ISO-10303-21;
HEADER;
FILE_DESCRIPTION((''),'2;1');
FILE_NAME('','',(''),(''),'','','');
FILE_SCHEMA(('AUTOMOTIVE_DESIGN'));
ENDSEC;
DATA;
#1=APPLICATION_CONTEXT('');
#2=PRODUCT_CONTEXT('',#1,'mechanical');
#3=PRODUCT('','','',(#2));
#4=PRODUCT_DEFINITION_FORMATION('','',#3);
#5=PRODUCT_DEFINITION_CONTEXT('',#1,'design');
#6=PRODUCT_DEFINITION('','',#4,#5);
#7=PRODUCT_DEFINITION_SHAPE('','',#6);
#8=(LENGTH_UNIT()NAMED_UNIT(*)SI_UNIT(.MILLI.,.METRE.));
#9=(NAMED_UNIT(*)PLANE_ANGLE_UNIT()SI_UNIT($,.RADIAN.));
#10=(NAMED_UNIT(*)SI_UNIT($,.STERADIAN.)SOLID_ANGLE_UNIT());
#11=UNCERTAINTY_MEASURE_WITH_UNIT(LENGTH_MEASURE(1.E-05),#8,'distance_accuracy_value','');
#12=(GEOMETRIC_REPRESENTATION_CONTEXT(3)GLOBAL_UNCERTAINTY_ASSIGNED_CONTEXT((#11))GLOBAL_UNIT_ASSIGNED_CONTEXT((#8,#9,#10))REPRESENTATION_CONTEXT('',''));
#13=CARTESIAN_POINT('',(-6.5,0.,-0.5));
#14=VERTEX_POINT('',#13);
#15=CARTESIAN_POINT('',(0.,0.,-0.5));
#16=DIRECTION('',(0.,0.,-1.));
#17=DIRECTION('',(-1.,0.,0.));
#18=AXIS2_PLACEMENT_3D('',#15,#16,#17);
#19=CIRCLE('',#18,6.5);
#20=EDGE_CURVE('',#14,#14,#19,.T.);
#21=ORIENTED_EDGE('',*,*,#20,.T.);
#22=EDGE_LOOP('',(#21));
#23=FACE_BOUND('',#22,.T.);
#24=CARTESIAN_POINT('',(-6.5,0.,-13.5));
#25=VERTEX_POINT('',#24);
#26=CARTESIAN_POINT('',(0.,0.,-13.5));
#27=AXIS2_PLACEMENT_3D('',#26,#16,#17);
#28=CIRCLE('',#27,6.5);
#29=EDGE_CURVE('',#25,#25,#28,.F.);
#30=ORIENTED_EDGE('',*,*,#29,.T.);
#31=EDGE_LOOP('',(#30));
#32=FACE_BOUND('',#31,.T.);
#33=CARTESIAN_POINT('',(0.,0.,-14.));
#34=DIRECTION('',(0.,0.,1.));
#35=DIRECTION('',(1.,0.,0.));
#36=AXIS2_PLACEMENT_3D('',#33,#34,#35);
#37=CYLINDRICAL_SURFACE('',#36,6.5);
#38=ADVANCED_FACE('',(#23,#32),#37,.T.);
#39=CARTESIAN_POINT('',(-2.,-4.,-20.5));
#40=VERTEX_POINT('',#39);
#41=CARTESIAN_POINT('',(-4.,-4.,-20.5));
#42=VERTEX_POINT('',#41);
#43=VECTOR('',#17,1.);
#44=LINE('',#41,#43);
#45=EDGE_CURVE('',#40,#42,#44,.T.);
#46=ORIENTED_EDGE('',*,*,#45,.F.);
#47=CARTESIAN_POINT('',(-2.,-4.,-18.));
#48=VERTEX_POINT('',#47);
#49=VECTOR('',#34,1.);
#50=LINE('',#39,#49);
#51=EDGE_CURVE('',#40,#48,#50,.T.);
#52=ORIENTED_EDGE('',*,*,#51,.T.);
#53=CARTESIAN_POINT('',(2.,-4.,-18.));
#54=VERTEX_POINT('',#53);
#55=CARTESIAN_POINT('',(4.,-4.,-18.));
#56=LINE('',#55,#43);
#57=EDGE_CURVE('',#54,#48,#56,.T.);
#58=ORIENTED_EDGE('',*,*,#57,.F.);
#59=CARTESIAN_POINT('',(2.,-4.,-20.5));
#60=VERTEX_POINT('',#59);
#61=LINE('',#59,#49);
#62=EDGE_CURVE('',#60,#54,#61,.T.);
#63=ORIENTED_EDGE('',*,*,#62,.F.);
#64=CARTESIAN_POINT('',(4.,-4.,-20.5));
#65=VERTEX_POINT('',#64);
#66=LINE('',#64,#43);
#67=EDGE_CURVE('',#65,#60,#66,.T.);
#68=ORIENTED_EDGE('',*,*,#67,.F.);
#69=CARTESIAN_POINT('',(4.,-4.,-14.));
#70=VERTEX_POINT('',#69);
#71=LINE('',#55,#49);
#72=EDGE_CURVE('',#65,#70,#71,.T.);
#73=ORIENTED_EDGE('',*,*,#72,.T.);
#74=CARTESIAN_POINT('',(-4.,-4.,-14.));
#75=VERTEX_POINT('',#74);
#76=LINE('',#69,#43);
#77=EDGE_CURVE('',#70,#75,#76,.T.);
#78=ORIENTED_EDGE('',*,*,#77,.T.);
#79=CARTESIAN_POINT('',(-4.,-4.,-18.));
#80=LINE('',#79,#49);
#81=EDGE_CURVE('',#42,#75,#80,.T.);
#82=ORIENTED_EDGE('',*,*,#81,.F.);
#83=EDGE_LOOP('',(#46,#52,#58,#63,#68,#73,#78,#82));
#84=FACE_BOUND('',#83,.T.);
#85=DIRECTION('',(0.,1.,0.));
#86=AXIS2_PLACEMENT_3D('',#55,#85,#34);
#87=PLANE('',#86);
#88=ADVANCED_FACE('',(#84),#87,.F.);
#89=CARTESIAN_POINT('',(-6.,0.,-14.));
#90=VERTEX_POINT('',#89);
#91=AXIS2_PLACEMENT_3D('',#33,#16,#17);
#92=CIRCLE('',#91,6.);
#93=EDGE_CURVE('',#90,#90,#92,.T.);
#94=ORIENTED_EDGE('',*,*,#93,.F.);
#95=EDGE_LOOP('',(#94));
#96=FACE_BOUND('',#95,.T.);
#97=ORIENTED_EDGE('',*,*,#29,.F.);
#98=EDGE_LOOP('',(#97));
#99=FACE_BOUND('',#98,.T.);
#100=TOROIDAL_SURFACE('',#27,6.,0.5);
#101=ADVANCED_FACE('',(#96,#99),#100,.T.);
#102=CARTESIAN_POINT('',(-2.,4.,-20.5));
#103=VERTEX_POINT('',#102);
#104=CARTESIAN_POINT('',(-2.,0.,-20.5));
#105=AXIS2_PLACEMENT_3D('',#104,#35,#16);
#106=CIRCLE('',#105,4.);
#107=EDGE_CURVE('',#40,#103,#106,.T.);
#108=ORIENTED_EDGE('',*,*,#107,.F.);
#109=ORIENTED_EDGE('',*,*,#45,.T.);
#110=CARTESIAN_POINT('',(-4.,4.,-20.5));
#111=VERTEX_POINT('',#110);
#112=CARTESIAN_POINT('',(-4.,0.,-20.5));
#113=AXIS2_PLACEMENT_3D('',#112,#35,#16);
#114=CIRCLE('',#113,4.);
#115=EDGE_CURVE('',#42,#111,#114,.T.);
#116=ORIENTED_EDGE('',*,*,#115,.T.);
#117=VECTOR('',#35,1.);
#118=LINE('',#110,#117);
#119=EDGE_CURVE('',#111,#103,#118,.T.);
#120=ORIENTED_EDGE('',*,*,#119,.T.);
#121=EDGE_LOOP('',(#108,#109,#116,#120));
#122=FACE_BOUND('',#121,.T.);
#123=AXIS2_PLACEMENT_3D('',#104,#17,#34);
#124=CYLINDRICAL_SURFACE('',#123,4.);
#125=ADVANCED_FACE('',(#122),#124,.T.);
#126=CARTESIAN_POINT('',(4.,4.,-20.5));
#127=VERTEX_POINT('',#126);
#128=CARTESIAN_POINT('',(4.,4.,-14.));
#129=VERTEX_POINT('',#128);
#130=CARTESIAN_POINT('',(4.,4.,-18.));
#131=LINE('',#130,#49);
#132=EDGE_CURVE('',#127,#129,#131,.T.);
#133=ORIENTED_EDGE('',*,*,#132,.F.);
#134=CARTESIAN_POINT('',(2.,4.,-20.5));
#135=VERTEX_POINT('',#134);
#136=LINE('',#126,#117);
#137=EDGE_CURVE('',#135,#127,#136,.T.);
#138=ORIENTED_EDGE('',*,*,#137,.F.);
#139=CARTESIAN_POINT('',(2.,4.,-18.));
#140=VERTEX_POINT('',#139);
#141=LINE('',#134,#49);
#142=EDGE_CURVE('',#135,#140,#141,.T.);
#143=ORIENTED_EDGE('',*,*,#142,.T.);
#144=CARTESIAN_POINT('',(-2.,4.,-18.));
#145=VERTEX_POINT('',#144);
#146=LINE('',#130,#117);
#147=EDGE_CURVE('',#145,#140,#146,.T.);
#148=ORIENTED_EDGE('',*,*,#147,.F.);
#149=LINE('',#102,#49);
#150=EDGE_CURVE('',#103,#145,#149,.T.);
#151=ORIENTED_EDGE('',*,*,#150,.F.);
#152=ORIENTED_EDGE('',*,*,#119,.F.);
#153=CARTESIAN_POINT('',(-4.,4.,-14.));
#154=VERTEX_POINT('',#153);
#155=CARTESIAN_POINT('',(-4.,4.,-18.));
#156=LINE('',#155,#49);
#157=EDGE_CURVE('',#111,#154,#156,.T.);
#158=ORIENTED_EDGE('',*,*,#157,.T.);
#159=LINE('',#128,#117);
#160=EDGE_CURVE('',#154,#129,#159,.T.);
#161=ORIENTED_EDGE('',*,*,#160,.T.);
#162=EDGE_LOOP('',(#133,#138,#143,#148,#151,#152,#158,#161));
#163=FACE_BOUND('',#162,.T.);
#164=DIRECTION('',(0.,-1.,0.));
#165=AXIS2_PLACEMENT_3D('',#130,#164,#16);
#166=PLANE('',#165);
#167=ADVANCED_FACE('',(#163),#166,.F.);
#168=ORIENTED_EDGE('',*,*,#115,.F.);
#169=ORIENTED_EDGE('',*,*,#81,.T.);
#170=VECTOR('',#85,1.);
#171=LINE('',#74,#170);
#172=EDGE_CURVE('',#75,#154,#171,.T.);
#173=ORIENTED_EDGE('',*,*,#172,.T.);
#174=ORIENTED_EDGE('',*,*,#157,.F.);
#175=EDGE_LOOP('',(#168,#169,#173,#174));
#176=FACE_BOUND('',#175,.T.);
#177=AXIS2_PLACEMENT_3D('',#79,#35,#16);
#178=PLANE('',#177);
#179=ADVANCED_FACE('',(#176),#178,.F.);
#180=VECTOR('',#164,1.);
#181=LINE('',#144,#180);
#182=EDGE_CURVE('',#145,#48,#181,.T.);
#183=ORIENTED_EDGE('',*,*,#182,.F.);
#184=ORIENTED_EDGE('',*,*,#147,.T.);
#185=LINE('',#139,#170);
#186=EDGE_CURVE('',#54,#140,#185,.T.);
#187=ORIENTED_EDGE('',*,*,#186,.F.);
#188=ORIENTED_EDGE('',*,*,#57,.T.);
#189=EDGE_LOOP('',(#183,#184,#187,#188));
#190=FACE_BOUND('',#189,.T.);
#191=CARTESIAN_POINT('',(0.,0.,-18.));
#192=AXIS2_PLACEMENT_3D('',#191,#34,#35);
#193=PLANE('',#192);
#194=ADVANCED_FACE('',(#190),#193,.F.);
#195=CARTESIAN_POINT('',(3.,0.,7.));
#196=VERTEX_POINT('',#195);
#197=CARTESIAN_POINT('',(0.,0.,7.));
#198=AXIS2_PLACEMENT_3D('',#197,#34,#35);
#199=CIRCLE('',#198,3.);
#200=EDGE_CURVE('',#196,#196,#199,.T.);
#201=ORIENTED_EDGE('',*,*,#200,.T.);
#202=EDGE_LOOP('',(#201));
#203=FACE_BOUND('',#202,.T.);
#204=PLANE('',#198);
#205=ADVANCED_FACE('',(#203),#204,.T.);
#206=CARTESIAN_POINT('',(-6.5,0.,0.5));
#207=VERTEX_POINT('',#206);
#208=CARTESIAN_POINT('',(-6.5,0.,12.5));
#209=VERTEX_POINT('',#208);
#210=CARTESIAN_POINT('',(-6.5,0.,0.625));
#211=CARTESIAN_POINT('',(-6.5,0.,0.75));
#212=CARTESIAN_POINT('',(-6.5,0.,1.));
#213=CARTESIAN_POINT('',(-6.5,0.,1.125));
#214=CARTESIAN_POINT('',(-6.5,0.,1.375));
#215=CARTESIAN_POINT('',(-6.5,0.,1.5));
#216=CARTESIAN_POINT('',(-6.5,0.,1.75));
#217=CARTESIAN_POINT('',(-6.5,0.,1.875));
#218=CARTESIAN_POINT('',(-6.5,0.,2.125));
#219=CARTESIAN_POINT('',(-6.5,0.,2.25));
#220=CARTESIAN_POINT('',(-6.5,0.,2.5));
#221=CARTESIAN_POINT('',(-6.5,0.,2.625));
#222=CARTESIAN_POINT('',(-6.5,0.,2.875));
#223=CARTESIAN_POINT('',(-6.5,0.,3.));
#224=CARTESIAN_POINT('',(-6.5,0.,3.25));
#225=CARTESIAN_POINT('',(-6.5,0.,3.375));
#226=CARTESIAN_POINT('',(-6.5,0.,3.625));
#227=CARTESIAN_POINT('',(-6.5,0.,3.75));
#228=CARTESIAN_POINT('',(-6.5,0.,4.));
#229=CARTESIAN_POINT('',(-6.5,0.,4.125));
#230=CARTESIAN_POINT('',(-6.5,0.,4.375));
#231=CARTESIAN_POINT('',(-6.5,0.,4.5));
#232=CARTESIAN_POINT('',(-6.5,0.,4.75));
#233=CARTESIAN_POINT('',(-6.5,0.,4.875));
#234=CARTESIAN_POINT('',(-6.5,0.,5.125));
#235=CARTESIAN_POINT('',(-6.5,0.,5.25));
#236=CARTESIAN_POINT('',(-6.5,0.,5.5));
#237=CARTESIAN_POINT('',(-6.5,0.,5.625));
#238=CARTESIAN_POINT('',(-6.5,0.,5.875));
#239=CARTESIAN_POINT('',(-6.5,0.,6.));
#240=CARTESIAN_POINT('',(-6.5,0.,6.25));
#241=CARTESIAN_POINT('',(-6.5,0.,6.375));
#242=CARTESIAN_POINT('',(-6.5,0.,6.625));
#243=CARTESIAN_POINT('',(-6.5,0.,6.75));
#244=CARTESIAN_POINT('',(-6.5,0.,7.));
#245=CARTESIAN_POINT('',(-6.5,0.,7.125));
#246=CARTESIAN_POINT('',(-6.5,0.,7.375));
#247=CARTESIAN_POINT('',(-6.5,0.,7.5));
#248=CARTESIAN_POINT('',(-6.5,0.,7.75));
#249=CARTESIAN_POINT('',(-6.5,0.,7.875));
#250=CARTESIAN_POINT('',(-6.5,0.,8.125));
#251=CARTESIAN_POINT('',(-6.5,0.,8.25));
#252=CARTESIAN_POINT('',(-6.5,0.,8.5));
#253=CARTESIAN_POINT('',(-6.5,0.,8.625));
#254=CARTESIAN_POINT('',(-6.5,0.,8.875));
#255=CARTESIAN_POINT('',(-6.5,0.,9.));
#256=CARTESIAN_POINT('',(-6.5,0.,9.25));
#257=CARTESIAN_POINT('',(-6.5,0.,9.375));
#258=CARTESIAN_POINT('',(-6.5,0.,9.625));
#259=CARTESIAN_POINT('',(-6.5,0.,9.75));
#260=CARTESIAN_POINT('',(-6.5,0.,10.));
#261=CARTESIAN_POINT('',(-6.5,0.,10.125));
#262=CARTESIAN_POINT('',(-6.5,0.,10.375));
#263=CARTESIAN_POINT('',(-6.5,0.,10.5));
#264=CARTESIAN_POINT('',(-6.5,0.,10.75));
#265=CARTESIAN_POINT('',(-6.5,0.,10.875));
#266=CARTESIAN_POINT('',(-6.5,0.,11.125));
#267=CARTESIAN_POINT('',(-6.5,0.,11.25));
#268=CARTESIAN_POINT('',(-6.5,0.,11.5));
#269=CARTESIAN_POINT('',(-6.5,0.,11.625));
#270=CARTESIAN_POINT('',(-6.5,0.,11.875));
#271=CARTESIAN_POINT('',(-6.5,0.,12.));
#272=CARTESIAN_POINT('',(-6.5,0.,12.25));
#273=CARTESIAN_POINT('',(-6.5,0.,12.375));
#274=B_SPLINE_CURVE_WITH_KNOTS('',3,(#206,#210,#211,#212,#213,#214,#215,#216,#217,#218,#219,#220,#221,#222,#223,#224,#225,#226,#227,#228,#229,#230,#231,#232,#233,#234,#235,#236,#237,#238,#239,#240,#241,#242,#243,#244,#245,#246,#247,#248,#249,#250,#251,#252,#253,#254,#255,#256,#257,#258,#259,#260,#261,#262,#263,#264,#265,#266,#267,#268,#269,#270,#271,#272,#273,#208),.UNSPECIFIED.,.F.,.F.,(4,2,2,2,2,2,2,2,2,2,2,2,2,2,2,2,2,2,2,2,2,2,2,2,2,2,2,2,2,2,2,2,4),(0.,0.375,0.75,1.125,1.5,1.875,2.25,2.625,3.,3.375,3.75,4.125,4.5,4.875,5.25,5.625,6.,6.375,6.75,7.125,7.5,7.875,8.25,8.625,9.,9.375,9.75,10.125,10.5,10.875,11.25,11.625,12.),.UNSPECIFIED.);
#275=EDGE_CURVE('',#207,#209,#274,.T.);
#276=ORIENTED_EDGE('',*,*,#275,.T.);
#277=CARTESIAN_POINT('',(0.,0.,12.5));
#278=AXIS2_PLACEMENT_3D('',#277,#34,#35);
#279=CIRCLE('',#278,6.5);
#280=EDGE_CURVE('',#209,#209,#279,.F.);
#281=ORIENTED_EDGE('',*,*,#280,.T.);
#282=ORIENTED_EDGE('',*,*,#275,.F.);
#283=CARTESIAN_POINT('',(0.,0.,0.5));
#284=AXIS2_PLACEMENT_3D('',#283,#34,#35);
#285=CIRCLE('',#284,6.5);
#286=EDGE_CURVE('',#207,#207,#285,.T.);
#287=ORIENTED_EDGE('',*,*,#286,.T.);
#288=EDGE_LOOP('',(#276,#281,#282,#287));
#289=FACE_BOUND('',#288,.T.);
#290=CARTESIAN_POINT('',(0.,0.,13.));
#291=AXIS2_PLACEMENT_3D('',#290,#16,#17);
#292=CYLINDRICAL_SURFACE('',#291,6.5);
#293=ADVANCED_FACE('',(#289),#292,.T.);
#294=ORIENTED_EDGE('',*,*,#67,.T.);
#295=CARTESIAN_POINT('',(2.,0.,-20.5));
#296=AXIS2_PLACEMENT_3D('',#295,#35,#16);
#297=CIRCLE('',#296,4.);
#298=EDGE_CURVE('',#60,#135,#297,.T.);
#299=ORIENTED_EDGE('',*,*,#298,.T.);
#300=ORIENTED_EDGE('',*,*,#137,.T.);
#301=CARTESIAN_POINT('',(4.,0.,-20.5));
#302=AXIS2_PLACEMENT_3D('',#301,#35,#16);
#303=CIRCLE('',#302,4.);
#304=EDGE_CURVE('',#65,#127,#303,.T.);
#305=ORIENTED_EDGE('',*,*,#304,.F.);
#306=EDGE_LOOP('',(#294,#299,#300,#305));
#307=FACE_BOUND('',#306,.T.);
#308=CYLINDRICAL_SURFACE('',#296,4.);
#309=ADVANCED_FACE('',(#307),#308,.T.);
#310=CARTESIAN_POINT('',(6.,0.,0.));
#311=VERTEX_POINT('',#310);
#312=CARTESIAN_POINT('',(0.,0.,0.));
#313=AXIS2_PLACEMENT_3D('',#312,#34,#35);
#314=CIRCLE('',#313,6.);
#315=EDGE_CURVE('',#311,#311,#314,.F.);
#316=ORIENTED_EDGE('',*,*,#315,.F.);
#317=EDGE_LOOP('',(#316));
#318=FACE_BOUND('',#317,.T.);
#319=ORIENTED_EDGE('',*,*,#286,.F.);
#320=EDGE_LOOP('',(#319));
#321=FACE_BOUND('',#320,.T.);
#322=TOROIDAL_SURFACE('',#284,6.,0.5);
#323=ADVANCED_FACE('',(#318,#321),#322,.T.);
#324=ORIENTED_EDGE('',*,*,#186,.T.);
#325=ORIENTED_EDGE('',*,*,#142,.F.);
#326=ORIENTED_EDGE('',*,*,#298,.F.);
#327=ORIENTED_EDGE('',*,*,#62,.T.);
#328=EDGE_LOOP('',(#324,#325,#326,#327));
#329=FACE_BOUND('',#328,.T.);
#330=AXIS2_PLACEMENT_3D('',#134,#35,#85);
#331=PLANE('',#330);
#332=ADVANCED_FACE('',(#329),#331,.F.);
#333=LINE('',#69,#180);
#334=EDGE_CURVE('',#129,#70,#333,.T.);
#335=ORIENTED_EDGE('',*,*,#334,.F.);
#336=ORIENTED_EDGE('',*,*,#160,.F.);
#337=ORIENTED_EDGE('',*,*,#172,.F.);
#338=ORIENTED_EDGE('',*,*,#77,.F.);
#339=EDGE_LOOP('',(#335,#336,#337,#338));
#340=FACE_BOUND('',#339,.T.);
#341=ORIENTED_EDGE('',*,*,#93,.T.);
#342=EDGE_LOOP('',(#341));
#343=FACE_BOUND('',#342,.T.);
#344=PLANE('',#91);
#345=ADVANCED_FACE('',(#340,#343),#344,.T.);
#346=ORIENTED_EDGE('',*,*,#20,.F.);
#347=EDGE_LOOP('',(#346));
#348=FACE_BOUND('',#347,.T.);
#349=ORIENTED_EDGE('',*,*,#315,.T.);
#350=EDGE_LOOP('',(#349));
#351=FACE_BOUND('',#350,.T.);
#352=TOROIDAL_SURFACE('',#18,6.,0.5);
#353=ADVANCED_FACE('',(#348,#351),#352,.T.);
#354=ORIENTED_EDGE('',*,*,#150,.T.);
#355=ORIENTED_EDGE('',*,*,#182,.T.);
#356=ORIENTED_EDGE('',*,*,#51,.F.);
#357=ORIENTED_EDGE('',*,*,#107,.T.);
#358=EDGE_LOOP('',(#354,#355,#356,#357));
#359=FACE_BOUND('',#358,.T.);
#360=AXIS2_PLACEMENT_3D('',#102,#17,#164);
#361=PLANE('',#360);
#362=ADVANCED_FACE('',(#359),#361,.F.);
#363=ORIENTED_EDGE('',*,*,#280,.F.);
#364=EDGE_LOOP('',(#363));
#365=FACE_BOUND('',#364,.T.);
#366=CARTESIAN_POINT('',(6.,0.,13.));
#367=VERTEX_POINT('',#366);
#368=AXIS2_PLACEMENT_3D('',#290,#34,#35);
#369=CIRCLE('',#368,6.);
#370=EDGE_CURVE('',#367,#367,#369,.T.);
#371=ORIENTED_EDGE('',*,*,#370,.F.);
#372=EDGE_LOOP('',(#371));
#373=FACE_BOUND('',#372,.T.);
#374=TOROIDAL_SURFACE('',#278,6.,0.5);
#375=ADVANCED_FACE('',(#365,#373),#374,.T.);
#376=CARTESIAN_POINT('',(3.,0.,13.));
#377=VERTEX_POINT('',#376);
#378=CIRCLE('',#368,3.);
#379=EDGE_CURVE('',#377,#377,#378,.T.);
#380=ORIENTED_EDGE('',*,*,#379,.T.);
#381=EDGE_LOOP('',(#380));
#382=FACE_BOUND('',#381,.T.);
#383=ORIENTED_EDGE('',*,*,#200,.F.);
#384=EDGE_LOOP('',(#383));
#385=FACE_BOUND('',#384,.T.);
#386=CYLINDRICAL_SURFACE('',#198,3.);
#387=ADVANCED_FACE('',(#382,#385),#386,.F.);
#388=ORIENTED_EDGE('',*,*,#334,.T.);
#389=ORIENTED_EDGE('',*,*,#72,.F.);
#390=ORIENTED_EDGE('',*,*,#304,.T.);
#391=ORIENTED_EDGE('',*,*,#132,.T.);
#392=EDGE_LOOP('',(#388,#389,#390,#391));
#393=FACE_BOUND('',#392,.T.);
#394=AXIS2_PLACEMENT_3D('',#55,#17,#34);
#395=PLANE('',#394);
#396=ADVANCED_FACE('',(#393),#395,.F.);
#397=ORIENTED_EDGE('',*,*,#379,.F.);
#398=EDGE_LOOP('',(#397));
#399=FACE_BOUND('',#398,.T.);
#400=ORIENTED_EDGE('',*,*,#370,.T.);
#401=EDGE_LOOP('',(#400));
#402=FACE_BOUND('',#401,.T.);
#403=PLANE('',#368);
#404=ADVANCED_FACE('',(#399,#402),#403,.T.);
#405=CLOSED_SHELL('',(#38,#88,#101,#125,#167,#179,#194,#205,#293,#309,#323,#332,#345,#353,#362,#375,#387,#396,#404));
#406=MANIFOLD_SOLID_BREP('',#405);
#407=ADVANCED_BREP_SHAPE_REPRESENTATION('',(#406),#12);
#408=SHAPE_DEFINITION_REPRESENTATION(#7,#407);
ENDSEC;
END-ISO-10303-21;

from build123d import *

# Parameters (mm, degrees)
SKETCH1_R           = 6.5
BOSS_EXTRUDE1_DEPTH = 13
FILLET1_R           = 0.5
SKETCH2_R           = 3
CUT_EXTRUDE1_DEPTH  = 6
BOSS_EXTRUDE2_START = 14
SKETCH3_R           = 6.5
BOSS_EXTRUDE2_DEPTH = 14
FILLET2_R           = 0.5
SKETCH4_W           = 8
SKETCH4_H           = 8
BOSS_EXTRUDE3_DEPTH = 4
SKETCH5_W           = 2
SKETCH5_H           = 8
BOSS_EXTRUDE4_DEPTH = 2.5
SKETCH6_R           = 4
BOSS_EXTRUDE5_DEPTH = 2


with BuildPart() as part:
    # Sketch1 → Boss-Extrude1 (new body)
    with BuildSketch(Plane.XY):
        with Locations(Location((0, 0, 0), (0, 0, 180))):
            Circle(SKETCH1_R)
    extrude(amount=BOSS_EXTRUDE1_DEPTH)

    # Fillet1
    fillet1_edges = [part.edges().sort_by_distance(p)[0] for p in [
        (6.5, 0, 0),
        (6.5, 0, 13),
    ]]
    fillet(fillet1_edges, radius=FILLET1_R)

    # Sketch2 → Cut-Extrude1 (cut)
    with BuildSketch(Plane.XY.offset(13)):
        Circle(SKETCH2_R)
    extrude(amount=-CUT_EXTRUDE1_DEPTH, mode=Mode.SUBTRACT)

    # Sketch3 → Boss-Extrude2 (add)
    with BuildSketch(Plane(origin=(0, 0, 0), x_dir=(-1, 0, 0), z_dir=(0, 0, -1)).offset(BOSS_EXTRUDE2_START)):
        Circle(SKETCH3_R)
    extrude(amount=-BOSS_EXTRUDE2_DEPTH)

    # Fillet2
    fillet2_edges = [part.edges().sort_by_distance(p)[0] for p in [
        (6.5, 0, 0),
        (6.5, 0, -14),
    ]]
    fillet(fillet2_edges, radius=FILLET2_R - 0.0001)  # a hair under: the kernel refuses the full size

    # Sketch4 → Boss-Extrude3 (add)
    with BuildSketch(Plane(origin=(0, 0, -14), x_dir=(-1, 0, 0), z_dir=(0, 0, -1))):
        Rectangle(SKETCH4_W, SKETCH4_H)
    extrude(amount=BOSS_EXTRUDE3_DEPTH)

    # Sketch5 → Boss-Extrude4 (add)
    with BuildSketch(Plane(origin=(0, 0, -18), x_dir=(-1, 0, 0), z_dir=(0, 0, -1))):
        with Locations((-3, 0)):
            Rectangle(SKETCH5_W, SKETCH5_H)
        with Locations((3, 0)):
            Rectangle(SKETCH5_W, SKETCH5_H)
    extrude(amount=BOSS_EXTRUDE4_DEPTH)

    # Sketch6 → Boss-Extrude5 (add)
    with BuildSketch(Plane(origin=(4, 0, 0), x_dir=(0, 0, -1), z_dir=(1, 0, 0))):
        with Locations((20.5, 0)):
            Circle(SKETCH6_R)
    boss_extrude5 = extrude(amount=-BOSS_EXTRUDE5_DEPTH)

    # Mirror1: Boss-Extrude5 across plane
    add(boss_extrude5.mirror(Plane(origin=(0, 0, 0), x_dir=(0, 0, 1), z_dir=(1, 0, 0))))


solid = part.part
